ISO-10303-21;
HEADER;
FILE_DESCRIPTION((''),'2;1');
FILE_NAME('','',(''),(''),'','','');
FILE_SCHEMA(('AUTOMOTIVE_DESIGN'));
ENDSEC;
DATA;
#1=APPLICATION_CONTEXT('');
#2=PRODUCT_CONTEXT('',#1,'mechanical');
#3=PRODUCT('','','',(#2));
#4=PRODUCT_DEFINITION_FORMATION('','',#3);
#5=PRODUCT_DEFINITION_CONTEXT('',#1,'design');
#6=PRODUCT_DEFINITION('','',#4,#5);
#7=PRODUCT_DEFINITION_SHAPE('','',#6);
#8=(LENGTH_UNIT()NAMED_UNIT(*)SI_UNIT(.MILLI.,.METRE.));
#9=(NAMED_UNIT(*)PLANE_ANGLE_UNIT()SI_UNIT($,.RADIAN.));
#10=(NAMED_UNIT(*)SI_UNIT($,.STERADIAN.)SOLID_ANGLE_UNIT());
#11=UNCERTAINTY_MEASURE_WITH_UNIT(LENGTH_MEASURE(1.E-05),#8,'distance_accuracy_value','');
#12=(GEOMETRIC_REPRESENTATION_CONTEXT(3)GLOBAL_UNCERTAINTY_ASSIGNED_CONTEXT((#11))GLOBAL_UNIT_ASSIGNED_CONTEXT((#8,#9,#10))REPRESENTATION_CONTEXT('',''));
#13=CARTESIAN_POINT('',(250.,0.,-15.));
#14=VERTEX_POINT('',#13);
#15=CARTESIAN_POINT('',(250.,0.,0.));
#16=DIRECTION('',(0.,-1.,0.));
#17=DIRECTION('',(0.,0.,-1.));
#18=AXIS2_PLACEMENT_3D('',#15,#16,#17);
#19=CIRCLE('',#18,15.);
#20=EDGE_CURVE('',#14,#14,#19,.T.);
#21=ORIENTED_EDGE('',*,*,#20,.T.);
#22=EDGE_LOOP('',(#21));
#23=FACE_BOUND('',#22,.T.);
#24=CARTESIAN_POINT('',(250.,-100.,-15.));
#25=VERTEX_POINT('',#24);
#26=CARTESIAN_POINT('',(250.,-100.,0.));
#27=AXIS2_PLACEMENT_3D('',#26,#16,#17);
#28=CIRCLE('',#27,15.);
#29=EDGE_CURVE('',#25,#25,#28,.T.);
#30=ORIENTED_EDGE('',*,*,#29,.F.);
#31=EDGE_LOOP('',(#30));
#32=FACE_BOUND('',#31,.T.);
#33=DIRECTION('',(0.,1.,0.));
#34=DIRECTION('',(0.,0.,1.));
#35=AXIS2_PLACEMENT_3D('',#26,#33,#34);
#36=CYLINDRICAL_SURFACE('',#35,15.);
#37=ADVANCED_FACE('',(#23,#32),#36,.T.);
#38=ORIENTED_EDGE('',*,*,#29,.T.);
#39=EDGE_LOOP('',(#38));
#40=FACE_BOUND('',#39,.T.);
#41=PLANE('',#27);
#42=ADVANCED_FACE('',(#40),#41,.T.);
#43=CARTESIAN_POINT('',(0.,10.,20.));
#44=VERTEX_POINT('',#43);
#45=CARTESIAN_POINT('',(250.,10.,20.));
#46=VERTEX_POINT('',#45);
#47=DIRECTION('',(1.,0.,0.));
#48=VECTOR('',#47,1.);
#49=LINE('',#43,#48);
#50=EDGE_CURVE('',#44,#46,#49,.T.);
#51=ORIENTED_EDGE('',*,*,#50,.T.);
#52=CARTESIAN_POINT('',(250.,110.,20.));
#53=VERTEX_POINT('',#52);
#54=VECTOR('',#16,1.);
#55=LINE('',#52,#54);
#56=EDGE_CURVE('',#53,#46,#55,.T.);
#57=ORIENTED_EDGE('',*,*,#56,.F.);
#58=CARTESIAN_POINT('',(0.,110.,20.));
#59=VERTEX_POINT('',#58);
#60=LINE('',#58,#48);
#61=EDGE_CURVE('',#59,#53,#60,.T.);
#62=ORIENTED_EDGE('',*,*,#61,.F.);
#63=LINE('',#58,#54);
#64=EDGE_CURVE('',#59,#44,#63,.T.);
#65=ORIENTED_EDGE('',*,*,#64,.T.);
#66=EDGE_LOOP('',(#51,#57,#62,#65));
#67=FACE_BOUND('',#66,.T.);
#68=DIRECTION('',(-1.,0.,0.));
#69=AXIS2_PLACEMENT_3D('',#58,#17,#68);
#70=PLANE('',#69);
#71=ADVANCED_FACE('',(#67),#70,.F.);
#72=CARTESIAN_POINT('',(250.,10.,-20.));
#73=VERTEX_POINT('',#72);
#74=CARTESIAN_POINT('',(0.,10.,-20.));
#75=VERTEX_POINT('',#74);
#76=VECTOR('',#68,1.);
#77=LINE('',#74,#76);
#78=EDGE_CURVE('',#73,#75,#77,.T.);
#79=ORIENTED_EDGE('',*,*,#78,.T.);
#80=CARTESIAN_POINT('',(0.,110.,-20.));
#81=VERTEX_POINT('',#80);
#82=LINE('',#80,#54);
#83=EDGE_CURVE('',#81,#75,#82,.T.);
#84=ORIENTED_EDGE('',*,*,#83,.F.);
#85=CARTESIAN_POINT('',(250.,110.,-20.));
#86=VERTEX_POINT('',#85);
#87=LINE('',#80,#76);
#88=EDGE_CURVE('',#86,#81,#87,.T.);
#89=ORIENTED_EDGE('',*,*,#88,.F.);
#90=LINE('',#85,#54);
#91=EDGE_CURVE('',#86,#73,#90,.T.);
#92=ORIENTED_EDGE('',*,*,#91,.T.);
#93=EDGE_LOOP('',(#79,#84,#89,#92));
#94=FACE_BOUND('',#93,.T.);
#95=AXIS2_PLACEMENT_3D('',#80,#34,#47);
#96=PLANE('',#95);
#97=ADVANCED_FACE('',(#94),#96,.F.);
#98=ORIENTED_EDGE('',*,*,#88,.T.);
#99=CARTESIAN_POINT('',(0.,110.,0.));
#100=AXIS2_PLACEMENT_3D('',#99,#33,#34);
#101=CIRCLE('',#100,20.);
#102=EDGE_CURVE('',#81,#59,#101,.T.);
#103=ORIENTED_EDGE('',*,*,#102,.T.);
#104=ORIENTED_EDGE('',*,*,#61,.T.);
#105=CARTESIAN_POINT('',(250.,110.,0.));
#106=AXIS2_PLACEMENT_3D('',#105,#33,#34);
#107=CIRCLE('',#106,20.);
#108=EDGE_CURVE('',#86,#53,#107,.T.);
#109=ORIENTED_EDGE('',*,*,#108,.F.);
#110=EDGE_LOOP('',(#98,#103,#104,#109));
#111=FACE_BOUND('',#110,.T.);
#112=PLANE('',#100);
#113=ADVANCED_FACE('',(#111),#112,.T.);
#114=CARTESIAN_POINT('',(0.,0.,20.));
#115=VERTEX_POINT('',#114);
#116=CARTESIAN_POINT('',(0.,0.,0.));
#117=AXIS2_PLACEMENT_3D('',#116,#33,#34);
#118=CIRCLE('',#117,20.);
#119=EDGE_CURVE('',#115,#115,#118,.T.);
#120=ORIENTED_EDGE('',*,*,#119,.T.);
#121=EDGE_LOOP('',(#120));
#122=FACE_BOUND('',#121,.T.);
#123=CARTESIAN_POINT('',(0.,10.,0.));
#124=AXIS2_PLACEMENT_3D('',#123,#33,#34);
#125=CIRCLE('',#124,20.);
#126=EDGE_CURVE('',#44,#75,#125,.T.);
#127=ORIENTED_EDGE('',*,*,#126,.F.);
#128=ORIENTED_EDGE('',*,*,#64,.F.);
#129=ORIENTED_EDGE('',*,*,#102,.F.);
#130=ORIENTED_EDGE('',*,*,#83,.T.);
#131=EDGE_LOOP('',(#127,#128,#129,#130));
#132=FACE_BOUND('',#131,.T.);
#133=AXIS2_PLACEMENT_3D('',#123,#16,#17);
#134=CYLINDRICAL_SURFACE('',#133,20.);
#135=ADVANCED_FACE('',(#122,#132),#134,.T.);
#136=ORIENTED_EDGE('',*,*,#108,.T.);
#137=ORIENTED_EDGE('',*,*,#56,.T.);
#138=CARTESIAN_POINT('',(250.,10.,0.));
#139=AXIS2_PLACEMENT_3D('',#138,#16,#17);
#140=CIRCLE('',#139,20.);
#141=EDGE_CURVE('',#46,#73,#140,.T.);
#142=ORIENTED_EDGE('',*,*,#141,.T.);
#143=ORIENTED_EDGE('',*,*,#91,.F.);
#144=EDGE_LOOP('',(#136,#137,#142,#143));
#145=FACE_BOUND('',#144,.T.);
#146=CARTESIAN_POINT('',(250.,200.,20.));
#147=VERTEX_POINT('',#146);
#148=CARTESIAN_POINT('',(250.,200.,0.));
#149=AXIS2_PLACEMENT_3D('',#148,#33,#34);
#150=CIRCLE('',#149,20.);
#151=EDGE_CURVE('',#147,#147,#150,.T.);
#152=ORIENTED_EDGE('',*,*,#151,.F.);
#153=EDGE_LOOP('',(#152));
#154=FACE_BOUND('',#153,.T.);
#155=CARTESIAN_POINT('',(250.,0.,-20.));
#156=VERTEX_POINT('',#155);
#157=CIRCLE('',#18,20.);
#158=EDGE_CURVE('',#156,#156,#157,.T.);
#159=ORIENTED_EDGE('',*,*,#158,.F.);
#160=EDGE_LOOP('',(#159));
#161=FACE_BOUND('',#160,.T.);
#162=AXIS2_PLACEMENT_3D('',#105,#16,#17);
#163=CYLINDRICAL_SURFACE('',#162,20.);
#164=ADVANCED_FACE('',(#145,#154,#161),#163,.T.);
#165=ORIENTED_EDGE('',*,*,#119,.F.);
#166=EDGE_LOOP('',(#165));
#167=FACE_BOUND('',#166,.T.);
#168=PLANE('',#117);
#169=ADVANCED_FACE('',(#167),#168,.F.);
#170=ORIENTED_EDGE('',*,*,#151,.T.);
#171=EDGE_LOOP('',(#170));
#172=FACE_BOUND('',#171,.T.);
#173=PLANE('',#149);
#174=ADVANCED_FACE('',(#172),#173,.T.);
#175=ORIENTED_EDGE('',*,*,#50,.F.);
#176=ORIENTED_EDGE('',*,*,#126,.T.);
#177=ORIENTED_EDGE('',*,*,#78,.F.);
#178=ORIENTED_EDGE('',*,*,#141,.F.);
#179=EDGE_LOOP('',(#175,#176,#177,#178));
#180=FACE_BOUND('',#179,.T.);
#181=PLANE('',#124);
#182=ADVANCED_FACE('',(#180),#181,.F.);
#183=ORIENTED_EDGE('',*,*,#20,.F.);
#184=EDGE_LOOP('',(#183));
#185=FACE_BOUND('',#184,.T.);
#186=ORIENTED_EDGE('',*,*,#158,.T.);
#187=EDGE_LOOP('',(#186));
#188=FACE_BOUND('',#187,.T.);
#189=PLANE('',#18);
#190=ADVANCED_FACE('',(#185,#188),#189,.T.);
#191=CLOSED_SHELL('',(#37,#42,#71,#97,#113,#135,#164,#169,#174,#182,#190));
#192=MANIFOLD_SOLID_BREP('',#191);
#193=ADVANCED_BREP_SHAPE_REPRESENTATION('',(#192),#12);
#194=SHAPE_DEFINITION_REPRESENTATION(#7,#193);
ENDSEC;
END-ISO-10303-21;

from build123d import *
from build123d.topology import SkipClean

# Parameters (mm, degrees)
SKETCH1_R           = 20
BOSS_EXTRUDE1_DEPTH = 10
BOSS_EXTRUDE2_DEPTH = 100
BOSS_EXTRUDE3_START = 10
SKETCH3_R           = 20
BOSS_EXTRUDE3_DEPTH = 10
SKETCH6_R           = 20
BOSS_EXTRUDE5_DEPTH = 90
SKETCH9_R           = 15
BOSS_EXTRUDE6_DEPTH = 100


with BuildPart() as part:
    # Sketch1 → Boss-Extrude1 (new body)
    with BuildSketch(Plane(origin=(0, 0, 0), x_dir=(1, 0, 0), z_dir=(0, 1, 0))):
        with Locations(Location((0, 0, 0), (0, 0, 270))):
            Circle(SKETCH1_R)
    extrude(amount=BOSS_EXTRUDE1_DEPTH)

    # Sketch2 → Boss-Extrude2 (add)
    with BuildSketch(Plane(origin=(0, 10, 0), x_dir=(1, 0, 0), z_dir=(0, 1, 0))):
        with BuildLine():
            Line((0, -20), (250, -20))
            ThreePointArc((250, -20), (270, 0), (250, 20))
            Line((250, 20), (0, 20))
            ThreePointArc((0, 20), (-20, 0), (0, -20))
        make_face()
    extrude(amount=BOSS_EXTRUDE2_DEPTH)

    # Sketch3 → Boss-Extrude3 (add)
    with SkipClean():  # the faces are left unmerged after this step: merging them gives an invalid solid
        with BuildSketch(Plane.XZ.offset(-10).offset(BOSS_EXTRUDE3_START)):
            with Locations(Location((250, 0, 0), (0, 0, 270))):
                Circle(SKETCH3_R)
        extrude(amount=-BOSS_EXTRUDE3_DEPTH)

    # Sketch6 → Boss-Extrude5 (add)
    with BuildSketch(Plane(origin=(0, 110, 0), x_dir=(1, 0, 0), z_dir=(0, 1, 0))):
        with Locations(Location((250, 0, 0), (0, 0, 90))):
            Circle(SKETCH6_R)
    extrude(amount=BOSS_EXTRUDE5_DEPTH)

    # Sketch9 → Boss-Extrude6 (add)
    with BuildSketch(Plane.XZ):
        with Locations(Location((250, 0, 0), (0, 0, 270))):
            Circle(SKETCH9_R)
    extrude(amount=BOSS_EXTRUDE6_DEPTH)


solid = part.part
